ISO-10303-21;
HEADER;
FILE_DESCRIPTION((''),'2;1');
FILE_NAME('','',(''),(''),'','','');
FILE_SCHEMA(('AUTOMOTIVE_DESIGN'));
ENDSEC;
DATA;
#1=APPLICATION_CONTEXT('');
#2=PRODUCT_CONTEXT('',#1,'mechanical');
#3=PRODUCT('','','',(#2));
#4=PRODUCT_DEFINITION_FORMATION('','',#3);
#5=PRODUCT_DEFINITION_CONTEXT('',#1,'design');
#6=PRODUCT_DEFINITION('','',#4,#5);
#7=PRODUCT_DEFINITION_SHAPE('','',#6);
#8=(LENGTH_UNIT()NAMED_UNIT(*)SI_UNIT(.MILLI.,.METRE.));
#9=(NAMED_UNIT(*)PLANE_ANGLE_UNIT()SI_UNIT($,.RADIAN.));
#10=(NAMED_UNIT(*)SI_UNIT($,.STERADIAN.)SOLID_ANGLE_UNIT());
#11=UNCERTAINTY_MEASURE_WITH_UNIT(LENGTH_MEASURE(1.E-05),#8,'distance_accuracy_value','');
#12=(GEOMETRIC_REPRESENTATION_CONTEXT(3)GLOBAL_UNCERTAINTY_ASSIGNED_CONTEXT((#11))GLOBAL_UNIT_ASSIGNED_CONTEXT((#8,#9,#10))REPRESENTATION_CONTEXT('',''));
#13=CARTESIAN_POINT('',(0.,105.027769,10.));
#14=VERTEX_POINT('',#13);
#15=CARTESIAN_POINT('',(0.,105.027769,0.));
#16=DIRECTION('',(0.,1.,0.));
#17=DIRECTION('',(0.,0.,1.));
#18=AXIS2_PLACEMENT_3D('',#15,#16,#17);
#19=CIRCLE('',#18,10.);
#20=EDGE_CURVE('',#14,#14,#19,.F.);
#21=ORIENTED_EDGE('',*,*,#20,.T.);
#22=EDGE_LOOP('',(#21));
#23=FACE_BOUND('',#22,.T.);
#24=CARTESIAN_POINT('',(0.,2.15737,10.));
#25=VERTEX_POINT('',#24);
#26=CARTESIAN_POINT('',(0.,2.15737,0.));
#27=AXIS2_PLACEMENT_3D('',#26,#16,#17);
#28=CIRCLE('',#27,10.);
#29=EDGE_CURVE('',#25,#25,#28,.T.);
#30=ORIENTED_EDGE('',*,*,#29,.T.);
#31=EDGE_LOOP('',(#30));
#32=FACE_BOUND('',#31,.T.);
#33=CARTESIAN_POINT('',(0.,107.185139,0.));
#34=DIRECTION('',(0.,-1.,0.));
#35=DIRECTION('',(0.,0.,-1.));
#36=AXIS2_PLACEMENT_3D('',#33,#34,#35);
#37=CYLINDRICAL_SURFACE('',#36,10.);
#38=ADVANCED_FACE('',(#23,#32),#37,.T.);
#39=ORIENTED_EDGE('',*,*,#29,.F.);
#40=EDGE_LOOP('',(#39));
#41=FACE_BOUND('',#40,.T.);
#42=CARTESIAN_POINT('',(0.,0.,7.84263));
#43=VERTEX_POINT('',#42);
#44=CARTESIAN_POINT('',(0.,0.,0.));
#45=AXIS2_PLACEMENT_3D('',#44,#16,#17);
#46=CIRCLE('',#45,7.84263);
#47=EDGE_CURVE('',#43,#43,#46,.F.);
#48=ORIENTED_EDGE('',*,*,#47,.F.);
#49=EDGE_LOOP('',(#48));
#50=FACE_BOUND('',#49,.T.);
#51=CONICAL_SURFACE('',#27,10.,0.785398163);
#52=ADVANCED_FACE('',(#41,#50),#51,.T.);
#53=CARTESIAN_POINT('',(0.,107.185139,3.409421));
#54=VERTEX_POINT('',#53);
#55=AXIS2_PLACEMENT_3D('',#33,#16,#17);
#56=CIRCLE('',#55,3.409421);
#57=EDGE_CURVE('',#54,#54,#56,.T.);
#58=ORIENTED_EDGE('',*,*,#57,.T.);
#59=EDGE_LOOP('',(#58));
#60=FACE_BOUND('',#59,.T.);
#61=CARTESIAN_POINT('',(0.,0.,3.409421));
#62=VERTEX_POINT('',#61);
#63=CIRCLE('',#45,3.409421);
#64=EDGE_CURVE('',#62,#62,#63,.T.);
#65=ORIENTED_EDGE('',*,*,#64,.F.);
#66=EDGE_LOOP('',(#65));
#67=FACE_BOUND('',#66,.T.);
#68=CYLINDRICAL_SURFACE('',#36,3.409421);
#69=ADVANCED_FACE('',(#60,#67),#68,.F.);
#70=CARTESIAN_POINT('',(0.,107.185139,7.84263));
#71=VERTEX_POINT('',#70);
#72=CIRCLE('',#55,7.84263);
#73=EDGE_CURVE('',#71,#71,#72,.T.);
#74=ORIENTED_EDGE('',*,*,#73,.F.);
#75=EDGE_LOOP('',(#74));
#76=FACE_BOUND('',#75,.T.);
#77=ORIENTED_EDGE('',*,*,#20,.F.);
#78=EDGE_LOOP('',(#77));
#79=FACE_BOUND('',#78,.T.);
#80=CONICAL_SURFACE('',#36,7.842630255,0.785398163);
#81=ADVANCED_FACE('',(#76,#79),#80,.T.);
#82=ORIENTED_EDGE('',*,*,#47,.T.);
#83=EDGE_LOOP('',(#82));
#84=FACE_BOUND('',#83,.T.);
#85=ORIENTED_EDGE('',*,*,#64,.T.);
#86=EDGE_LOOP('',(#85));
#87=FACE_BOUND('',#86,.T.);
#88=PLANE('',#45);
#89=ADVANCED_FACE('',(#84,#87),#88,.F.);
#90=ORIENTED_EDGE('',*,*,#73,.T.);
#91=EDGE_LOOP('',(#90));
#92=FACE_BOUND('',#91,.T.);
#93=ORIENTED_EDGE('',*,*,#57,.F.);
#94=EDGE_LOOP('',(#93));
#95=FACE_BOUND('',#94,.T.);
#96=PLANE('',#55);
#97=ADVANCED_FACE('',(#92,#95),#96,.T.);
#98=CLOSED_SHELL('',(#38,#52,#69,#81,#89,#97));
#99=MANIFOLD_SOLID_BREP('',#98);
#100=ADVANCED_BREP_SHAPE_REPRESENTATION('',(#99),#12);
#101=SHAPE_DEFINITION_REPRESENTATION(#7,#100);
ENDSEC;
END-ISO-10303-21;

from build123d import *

# Parameters (mm, degrees)
SKETCH1_R           = 10
BOSS_EXTRUDE1_DEPTH = 107.185138911
SKETCH2_R           = 3.40942067
CUT_EXTRUDE1_DEPTH  = 109.114078655
CHAMFER1_SIZE       = 2.157369745


with BuildPart() as part:
    # Sketch1 → Boss-Extrude1 (new body)
    with BuildSketch(Plane(origin=(0, 0, 0), x_dir=(1, 0, 0), z_dir=(0, 1, 0))):
        Circle(SKETCH1_R)
    extrude(amount=BOSS_EXTRUDE1_DEPTH)

    # Sketch2 → Cut-Extrude1 (cut, through all)
    with BuildSketch(Plane(origin=(0, 0, 0), x_dir=(1, 0, 0), z_dir=(0, 1, 0))):
        Circle(SKETCH2_R)
    extrude(amount=CUT_EXTRUDE1_DEPTH, mode=Mode.SUBTRACT)

    # Chamfer1
    chamfer1_edges = [part.edges().sort_by_distance(p)[0] for p in [
        (-10, 107.185138911, 0),
        (-10, 0, 0),
    ]]
    chamfer(chamfer1_edges, length=CHAMFER1_SIZE)


solid = part.part
